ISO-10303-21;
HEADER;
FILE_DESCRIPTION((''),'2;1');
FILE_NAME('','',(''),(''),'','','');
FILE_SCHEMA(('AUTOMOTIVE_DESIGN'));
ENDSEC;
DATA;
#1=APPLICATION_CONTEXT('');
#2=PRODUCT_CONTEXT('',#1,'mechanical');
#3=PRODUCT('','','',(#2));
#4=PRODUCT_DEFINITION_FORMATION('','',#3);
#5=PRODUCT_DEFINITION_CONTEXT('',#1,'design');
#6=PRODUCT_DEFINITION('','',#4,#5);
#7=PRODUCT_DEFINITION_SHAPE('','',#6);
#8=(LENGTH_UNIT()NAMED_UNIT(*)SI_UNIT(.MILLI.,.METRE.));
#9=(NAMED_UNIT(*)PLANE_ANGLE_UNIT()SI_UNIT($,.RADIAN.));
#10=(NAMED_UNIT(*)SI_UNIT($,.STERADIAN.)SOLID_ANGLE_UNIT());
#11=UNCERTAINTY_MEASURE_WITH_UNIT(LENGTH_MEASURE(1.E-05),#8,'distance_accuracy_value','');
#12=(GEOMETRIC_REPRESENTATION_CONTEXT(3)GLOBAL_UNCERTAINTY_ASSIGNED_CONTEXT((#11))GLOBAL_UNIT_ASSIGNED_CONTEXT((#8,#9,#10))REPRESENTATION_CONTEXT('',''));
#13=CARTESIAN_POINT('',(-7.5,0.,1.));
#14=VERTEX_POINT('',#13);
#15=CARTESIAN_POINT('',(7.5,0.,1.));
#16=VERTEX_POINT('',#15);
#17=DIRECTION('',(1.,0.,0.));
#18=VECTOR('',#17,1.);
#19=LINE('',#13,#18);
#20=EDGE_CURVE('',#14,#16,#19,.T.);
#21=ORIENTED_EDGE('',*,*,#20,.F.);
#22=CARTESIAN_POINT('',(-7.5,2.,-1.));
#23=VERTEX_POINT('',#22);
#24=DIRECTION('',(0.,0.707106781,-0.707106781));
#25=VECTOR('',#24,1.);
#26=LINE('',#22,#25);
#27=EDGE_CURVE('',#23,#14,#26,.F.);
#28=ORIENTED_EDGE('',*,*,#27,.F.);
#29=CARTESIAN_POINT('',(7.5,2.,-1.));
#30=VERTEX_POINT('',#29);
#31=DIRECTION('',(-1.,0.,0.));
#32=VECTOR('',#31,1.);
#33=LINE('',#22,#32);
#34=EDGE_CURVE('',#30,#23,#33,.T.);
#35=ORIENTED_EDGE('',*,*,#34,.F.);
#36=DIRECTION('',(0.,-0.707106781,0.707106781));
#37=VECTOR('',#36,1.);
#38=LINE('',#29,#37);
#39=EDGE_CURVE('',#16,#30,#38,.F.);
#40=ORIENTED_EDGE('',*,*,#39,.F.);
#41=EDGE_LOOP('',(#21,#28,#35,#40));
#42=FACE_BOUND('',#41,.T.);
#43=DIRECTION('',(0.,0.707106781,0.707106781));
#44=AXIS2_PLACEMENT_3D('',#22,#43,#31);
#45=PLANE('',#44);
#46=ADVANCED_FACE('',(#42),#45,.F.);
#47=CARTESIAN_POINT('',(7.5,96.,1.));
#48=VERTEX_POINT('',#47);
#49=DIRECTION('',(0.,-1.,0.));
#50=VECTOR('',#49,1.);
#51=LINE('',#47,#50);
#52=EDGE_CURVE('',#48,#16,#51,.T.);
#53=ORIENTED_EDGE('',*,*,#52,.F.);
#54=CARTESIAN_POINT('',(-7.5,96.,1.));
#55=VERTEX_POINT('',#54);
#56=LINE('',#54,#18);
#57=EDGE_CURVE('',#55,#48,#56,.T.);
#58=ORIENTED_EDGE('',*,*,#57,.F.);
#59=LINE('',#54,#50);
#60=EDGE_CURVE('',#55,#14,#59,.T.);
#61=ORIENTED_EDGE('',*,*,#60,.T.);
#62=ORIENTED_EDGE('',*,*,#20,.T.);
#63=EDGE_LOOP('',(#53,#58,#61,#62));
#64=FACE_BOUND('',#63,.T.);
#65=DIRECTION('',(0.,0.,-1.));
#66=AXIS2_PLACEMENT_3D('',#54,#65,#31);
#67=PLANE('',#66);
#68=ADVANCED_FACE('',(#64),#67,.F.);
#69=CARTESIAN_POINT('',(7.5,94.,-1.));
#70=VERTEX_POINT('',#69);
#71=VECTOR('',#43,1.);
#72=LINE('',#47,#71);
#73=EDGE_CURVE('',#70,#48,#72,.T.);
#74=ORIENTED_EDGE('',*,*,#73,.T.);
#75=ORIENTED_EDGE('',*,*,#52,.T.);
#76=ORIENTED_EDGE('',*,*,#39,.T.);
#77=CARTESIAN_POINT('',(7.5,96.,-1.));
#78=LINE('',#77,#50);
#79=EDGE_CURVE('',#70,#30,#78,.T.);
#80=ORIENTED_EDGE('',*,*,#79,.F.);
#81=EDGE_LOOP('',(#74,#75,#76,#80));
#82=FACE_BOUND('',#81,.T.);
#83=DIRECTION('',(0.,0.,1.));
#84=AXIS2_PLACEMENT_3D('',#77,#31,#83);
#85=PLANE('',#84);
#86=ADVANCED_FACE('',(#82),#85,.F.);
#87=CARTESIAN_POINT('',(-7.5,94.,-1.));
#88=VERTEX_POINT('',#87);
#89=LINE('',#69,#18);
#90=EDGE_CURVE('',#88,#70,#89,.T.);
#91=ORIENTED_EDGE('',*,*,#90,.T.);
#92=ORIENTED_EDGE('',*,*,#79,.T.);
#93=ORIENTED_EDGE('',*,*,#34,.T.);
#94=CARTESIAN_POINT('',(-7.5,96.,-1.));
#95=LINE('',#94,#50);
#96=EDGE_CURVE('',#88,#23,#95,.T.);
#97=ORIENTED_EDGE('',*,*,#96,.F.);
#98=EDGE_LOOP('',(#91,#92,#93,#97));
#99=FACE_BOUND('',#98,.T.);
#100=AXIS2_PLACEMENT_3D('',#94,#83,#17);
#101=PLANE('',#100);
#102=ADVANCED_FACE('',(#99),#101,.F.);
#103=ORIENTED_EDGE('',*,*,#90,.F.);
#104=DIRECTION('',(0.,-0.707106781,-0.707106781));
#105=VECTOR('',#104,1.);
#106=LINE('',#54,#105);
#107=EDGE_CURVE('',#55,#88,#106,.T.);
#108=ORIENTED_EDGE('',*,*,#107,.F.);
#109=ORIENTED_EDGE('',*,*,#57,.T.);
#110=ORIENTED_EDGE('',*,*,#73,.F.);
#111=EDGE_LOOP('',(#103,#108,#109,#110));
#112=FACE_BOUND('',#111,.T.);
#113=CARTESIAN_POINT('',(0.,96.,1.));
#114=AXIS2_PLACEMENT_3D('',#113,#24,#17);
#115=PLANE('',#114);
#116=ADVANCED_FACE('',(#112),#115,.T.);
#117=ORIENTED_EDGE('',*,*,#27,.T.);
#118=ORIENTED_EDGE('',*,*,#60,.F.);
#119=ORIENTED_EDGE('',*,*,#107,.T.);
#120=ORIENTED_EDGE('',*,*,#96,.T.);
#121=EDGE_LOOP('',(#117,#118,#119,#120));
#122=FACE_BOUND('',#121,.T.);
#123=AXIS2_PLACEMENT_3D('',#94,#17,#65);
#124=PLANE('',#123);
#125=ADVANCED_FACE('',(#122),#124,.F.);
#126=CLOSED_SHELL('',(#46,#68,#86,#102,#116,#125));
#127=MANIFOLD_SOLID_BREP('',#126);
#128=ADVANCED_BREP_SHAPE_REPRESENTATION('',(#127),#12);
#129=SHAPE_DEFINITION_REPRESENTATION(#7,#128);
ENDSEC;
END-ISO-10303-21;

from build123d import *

# Parameters (mm, degrees)
SKETCH1_W           = 15
SKETCH1_H           = 2
BOSS_EXTRUDE1_DEPTH = 96
CHAMFER1_SIZE       = 2


with BuildPart() as part:
    # Sketch1 → Boss-Extrude1 (new body)
    with BuildSketch(Plane(origin=(0, 0, 0), x_dir=(1, 0, 0), z_dir=(0, 1, 0))):
        Rectangle(SKETCH1_W, SKETCH1_H)
    extrude(amount=BOSS_EXTRUDE1_DEPTH)

    # Chamfer1
    chamfer1_edges = [part.edges().sort_by_distance(p)[0] for p in [
        (0, 0, -1),
        (0, 96, -1),
    ]]
    chamfer(chamfer1_edges, length=CHAMFER1_SIZE - 0.0001)  # a hair under: the kernel refuses the full size


solid = part.part
